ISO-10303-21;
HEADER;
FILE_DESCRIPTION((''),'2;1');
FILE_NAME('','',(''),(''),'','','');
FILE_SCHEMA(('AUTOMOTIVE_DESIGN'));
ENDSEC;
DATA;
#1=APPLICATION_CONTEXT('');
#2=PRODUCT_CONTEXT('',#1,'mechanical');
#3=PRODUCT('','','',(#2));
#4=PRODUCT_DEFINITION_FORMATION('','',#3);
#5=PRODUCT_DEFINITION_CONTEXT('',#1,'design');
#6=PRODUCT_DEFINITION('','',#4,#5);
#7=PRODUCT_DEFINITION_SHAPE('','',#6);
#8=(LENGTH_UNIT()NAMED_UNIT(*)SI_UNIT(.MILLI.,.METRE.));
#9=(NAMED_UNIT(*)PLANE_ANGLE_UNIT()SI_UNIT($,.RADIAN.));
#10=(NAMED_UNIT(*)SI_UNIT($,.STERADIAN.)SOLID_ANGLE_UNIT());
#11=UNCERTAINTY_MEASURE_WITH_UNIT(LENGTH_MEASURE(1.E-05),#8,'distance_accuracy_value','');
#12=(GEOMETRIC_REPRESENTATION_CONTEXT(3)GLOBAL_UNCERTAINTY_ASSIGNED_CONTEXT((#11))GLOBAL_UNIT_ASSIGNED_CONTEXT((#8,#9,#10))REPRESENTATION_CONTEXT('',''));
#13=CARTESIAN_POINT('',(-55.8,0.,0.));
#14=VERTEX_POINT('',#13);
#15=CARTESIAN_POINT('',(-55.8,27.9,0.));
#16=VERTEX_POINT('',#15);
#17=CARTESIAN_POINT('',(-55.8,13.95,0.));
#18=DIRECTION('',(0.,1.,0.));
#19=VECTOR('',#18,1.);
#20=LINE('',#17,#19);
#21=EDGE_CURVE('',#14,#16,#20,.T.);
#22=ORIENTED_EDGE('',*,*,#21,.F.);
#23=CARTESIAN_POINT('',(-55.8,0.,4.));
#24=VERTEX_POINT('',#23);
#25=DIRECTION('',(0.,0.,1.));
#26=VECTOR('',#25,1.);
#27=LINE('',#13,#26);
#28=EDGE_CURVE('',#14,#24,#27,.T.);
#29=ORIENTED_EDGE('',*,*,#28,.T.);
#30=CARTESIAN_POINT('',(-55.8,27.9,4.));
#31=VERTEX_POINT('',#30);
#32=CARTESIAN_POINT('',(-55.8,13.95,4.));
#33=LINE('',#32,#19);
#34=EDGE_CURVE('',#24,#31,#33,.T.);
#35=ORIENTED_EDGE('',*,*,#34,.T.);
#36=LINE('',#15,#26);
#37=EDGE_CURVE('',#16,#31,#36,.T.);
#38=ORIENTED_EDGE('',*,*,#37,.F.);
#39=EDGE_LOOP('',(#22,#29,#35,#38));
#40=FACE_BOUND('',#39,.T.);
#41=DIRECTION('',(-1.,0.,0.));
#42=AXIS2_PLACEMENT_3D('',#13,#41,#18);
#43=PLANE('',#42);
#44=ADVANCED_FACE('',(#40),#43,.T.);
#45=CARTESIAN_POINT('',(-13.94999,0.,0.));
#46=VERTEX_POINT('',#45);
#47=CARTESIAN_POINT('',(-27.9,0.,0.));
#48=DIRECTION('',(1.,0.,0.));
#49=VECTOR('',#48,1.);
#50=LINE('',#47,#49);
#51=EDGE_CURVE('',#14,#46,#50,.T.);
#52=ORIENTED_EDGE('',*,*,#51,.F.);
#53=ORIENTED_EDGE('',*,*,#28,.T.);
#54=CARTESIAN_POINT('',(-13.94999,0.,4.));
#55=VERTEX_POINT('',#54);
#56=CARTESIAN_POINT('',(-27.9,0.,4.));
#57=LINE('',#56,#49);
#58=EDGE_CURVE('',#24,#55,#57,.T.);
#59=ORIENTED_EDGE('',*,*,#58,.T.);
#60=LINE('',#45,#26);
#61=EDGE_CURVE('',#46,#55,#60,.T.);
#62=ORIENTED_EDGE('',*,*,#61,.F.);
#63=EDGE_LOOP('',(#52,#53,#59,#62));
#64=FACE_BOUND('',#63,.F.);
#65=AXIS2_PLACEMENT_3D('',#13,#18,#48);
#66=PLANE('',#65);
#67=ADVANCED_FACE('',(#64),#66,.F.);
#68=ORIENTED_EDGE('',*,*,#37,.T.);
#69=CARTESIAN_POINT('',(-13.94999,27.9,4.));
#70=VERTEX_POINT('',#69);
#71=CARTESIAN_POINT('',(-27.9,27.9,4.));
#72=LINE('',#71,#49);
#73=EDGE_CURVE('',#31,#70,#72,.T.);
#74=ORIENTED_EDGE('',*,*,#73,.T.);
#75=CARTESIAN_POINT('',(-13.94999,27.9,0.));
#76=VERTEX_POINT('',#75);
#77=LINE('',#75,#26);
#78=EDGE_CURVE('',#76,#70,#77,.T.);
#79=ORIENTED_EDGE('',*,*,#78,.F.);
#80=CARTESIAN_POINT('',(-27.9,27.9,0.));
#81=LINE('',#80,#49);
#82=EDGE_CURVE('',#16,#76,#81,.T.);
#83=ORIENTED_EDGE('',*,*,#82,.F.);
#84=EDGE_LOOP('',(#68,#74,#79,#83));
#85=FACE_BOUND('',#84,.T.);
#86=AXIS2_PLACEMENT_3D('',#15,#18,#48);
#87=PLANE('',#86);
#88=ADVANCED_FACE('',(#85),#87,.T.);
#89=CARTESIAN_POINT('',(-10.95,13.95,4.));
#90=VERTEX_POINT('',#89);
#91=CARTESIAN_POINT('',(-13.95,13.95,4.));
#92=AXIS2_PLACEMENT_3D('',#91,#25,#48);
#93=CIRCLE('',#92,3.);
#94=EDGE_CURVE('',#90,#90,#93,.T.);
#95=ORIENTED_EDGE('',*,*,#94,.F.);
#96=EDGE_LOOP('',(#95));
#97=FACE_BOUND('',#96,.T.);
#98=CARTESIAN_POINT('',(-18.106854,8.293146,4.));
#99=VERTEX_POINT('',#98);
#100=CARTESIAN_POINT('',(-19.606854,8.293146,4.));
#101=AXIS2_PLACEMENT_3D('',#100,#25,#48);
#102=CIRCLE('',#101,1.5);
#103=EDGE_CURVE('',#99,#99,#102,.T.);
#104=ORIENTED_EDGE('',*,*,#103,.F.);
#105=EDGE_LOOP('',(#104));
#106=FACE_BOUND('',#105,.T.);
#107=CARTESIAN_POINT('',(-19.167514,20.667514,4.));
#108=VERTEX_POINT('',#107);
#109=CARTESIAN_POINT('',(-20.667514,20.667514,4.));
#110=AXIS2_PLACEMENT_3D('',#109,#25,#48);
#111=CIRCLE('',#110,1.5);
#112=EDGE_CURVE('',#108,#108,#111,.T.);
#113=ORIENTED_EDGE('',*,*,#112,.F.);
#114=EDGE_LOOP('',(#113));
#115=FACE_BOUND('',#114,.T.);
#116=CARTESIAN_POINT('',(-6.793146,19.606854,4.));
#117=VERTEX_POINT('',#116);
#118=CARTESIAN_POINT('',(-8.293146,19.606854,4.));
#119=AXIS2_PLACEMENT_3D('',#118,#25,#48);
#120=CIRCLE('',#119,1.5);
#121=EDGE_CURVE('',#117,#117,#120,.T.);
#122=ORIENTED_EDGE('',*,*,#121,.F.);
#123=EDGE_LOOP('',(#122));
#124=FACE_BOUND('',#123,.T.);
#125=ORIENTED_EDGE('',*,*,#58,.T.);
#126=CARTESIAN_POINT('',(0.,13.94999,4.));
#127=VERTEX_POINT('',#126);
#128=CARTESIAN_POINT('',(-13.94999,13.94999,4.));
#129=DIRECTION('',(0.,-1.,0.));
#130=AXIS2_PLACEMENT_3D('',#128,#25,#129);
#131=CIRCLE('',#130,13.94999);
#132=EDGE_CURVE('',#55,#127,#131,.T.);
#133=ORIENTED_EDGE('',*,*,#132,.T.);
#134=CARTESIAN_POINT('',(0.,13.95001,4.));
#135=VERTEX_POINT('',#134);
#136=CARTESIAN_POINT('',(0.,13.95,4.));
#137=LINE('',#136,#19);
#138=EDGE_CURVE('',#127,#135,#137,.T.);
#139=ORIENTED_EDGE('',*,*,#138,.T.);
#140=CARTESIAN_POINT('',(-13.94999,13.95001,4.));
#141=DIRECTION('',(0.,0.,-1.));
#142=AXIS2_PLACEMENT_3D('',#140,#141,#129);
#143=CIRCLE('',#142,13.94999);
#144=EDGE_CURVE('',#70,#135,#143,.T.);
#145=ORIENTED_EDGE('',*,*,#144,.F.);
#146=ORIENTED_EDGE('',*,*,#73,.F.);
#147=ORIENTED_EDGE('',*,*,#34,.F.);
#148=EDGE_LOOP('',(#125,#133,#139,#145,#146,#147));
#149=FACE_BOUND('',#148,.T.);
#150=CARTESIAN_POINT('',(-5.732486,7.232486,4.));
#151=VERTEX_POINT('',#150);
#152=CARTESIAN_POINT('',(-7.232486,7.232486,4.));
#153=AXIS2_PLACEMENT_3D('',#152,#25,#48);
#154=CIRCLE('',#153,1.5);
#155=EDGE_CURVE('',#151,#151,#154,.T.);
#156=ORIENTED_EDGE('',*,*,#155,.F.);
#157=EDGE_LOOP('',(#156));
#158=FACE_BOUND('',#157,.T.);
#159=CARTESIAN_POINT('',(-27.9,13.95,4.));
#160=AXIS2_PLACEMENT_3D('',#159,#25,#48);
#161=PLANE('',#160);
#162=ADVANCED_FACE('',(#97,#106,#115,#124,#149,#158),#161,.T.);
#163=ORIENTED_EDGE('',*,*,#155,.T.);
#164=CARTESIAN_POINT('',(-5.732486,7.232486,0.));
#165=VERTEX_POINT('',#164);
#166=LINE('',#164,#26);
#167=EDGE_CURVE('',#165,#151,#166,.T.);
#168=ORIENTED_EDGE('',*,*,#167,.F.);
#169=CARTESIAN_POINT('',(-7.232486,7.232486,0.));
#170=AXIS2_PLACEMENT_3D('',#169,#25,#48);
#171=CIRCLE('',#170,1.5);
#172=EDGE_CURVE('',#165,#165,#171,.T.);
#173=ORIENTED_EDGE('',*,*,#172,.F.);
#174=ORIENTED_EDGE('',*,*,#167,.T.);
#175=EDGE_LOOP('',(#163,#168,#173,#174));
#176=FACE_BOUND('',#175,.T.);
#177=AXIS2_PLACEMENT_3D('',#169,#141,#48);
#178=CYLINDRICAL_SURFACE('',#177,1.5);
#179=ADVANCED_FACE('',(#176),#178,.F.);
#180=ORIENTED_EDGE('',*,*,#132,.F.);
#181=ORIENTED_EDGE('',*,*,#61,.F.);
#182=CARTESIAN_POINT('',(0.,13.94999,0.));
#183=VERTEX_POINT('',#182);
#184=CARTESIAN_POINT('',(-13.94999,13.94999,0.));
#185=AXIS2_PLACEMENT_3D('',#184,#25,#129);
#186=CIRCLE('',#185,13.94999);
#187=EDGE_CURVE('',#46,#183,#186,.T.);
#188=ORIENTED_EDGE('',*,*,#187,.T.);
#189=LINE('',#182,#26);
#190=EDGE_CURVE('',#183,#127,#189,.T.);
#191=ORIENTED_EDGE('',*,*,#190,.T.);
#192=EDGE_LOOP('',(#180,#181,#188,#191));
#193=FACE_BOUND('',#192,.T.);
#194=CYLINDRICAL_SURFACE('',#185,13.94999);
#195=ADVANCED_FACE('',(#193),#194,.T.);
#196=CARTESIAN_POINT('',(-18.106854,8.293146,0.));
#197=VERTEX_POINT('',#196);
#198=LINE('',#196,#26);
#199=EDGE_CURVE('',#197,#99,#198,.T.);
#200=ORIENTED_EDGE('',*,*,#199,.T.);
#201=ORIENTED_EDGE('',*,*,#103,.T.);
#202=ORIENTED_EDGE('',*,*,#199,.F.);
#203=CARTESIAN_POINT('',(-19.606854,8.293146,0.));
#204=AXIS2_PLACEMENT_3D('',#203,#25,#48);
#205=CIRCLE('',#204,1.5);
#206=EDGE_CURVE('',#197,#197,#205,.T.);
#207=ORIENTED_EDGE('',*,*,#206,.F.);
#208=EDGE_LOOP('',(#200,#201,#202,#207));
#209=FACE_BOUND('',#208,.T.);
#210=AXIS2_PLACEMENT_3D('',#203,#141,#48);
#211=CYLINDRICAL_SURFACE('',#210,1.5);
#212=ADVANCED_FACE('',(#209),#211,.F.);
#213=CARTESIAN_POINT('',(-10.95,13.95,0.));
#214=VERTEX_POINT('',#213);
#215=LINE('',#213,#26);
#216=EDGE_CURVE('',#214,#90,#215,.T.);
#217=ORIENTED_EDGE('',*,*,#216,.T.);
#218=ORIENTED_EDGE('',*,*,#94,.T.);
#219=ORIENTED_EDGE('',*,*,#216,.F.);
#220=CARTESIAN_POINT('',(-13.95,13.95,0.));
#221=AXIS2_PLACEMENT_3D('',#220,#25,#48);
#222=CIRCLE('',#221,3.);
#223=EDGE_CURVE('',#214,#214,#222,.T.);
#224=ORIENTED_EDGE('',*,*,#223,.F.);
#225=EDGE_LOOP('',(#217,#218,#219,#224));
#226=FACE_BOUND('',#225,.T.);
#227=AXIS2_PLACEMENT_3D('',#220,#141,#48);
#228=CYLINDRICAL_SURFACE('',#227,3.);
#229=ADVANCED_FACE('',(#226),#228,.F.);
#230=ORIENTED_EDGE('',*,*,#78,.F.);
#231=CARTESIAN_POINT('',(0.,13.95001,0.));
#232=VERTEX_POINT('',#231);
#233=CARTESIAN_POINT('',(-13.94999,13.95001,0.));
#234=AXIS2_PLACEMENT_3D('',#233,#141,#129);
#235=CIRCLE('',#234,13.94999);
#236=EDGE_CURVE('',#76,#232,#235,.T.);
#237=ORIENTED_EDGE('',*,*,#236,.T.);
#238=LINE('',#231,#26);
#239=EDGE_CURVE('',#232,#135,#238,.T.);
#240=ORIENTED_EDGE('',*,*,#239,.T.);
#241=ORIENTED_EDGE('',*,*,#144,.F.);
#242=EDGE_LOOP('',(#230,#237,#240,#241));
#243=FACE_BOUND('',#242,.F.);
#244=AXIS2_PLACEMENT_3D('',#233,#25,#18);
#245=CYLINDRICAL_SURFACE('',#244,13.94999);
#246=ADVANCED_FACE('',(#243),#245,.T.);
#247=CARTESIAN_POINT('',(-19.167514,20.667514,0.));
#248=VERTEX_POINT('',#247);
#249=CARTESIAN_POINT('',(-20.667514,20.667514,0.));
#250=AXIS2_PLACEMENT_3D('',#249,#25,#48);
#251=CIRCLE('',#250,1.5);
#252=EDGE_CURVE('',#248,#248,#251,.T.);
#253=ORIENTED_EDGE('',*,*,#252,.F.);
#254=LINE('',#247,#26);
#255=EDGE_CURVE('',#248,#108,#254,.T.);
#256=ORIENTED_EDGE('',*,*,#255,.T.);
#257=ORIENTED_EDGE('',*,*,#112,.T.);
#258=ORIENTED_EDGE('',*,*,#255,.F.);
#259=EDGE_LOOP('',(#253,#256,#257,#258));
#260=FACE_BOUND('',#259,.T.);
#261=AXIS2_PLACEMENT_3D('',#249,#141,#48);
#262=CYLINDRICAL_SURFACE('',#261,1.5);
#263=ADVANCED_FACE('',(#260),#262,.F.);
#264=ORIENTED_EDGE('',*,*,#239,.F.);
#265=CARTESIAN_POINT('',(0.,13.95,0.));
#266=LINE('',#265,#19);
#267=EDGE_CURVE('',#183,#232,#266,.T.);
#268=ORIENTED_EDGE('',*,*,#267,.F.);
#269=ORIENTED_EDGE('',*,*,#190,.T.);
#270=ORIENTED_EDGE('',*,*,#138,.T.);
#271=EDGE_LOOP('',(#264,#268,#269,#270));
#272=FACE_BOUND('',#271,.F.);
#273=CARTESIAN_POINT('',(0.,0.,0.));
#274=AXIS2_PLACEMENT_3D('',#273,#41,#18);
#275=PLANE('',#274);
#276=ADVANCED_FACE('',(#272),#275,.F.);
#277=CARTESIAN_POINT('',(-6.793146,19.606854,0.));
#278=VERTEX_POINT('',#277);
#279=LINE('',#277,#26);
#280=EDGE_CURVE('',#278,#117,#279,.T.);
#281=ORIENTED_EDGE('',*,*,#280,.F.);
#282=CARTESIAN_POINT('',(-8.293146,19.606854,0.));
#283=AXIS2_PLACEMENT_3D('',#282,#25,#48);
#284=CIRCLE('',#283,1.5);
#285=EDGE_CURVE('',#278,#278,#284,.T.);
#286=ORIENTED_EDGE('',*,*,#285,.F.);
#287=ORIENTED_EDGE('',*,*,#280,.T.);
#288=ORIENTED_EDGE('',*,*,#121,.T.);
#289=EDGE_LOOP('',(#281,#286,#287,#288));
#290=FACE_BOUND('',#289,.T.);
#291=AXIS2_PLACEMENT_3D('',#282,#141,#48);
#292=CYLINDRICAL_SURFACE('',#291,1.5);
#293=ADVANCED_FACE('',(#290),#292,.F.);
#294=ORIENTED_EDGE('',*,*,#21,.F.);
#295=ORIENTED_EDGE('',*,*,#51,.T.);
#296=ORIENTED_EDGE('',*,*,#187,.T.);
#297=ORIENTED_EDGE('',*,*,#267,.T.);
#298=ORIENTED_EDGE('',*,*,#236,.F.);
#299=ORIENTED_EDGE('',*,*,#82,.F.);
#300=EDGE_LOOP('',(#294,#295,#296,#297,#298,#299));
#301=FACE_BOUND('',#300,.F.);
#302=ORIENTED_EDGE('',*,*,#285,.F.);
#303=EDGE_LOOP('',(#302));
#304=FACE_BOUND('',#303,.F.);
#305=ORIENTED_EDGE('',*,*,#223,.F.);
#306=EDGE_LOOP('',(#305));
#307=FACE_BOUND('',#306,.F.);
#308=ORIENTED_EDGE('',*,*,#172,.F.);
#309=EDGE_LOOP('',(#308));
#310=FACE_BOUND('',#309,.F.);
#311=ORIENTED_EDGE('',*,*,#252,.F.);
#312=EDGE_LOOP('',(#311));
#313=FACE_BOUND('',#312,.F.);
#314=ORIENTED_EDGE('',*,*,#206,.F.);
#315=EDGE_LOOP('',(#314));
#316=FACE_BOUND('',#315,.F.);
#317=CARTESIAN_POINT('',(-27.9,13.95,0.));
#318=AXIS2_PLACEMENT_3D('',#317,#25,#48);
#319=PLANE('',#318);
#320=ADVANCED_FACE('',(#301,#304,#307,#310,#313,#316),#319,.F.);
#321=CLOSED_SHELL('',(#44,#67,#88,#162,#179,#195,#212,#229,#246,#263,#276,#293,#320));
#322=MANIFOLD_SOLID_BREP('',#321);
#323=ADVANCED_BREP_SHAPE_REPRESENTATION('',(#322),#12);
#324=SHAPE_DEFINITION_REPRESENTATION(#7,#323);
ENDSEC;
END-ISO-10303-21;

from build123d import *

# Parameters (mm, degrees)
F0_W     = 55.8
F0_H     = 27.9
F0_R     = 1.5
F0_R_2   = 3
F1_DEPTH = 4
F2_R     = 13.94999


# Not quite as in the source:
# - a fillet or chamfer is up to 0.001 mm smaller than in the source, because OpenCascade refuses the exact size


with BuildPart() as f1:
    # F0 (on Top) → F1 (new body)
    with BuildSketch(Plane.XY):
        with Locations((-27.9, 13.95)):
            Rectangle(F0_W, F0_H)
        with Locations((-19.6068542495, 8.2931457505)):
            Circle(F0_R, mode=Mode.SUBTRACT)
        with Locations((-7.2324855787, 7.2324855787)):
            Circle(F0_R, mode=Mode.SUBTRACT)
        with Locations((-20.6675144213, 20.6675144213)):
            Circle(F0_R, mode=Mode.SUBTRACT)
        with Locations((-13.95, 13.95)):
            Circle(F0_R_2, mode=Mode.SUBTRACT)
        with Locations((-8.2931457505, 19.6068542495)):
            Circle(F0_R, mode=Mode.SUBTRACT)
    extrude(amount=F1_DEPTH)

    # F2 (radius 13.95 in the source; OpenCascade refuses exactly that, so slightly less here)
    f2_edges = [f1.edges().sort_by_distance(p)[0] for p in [
        (0, 27.9, 2),
        (0, 0, 2),
    ]]
    fillet(f2_edges, radius=F2_R)


solid = f1.part
